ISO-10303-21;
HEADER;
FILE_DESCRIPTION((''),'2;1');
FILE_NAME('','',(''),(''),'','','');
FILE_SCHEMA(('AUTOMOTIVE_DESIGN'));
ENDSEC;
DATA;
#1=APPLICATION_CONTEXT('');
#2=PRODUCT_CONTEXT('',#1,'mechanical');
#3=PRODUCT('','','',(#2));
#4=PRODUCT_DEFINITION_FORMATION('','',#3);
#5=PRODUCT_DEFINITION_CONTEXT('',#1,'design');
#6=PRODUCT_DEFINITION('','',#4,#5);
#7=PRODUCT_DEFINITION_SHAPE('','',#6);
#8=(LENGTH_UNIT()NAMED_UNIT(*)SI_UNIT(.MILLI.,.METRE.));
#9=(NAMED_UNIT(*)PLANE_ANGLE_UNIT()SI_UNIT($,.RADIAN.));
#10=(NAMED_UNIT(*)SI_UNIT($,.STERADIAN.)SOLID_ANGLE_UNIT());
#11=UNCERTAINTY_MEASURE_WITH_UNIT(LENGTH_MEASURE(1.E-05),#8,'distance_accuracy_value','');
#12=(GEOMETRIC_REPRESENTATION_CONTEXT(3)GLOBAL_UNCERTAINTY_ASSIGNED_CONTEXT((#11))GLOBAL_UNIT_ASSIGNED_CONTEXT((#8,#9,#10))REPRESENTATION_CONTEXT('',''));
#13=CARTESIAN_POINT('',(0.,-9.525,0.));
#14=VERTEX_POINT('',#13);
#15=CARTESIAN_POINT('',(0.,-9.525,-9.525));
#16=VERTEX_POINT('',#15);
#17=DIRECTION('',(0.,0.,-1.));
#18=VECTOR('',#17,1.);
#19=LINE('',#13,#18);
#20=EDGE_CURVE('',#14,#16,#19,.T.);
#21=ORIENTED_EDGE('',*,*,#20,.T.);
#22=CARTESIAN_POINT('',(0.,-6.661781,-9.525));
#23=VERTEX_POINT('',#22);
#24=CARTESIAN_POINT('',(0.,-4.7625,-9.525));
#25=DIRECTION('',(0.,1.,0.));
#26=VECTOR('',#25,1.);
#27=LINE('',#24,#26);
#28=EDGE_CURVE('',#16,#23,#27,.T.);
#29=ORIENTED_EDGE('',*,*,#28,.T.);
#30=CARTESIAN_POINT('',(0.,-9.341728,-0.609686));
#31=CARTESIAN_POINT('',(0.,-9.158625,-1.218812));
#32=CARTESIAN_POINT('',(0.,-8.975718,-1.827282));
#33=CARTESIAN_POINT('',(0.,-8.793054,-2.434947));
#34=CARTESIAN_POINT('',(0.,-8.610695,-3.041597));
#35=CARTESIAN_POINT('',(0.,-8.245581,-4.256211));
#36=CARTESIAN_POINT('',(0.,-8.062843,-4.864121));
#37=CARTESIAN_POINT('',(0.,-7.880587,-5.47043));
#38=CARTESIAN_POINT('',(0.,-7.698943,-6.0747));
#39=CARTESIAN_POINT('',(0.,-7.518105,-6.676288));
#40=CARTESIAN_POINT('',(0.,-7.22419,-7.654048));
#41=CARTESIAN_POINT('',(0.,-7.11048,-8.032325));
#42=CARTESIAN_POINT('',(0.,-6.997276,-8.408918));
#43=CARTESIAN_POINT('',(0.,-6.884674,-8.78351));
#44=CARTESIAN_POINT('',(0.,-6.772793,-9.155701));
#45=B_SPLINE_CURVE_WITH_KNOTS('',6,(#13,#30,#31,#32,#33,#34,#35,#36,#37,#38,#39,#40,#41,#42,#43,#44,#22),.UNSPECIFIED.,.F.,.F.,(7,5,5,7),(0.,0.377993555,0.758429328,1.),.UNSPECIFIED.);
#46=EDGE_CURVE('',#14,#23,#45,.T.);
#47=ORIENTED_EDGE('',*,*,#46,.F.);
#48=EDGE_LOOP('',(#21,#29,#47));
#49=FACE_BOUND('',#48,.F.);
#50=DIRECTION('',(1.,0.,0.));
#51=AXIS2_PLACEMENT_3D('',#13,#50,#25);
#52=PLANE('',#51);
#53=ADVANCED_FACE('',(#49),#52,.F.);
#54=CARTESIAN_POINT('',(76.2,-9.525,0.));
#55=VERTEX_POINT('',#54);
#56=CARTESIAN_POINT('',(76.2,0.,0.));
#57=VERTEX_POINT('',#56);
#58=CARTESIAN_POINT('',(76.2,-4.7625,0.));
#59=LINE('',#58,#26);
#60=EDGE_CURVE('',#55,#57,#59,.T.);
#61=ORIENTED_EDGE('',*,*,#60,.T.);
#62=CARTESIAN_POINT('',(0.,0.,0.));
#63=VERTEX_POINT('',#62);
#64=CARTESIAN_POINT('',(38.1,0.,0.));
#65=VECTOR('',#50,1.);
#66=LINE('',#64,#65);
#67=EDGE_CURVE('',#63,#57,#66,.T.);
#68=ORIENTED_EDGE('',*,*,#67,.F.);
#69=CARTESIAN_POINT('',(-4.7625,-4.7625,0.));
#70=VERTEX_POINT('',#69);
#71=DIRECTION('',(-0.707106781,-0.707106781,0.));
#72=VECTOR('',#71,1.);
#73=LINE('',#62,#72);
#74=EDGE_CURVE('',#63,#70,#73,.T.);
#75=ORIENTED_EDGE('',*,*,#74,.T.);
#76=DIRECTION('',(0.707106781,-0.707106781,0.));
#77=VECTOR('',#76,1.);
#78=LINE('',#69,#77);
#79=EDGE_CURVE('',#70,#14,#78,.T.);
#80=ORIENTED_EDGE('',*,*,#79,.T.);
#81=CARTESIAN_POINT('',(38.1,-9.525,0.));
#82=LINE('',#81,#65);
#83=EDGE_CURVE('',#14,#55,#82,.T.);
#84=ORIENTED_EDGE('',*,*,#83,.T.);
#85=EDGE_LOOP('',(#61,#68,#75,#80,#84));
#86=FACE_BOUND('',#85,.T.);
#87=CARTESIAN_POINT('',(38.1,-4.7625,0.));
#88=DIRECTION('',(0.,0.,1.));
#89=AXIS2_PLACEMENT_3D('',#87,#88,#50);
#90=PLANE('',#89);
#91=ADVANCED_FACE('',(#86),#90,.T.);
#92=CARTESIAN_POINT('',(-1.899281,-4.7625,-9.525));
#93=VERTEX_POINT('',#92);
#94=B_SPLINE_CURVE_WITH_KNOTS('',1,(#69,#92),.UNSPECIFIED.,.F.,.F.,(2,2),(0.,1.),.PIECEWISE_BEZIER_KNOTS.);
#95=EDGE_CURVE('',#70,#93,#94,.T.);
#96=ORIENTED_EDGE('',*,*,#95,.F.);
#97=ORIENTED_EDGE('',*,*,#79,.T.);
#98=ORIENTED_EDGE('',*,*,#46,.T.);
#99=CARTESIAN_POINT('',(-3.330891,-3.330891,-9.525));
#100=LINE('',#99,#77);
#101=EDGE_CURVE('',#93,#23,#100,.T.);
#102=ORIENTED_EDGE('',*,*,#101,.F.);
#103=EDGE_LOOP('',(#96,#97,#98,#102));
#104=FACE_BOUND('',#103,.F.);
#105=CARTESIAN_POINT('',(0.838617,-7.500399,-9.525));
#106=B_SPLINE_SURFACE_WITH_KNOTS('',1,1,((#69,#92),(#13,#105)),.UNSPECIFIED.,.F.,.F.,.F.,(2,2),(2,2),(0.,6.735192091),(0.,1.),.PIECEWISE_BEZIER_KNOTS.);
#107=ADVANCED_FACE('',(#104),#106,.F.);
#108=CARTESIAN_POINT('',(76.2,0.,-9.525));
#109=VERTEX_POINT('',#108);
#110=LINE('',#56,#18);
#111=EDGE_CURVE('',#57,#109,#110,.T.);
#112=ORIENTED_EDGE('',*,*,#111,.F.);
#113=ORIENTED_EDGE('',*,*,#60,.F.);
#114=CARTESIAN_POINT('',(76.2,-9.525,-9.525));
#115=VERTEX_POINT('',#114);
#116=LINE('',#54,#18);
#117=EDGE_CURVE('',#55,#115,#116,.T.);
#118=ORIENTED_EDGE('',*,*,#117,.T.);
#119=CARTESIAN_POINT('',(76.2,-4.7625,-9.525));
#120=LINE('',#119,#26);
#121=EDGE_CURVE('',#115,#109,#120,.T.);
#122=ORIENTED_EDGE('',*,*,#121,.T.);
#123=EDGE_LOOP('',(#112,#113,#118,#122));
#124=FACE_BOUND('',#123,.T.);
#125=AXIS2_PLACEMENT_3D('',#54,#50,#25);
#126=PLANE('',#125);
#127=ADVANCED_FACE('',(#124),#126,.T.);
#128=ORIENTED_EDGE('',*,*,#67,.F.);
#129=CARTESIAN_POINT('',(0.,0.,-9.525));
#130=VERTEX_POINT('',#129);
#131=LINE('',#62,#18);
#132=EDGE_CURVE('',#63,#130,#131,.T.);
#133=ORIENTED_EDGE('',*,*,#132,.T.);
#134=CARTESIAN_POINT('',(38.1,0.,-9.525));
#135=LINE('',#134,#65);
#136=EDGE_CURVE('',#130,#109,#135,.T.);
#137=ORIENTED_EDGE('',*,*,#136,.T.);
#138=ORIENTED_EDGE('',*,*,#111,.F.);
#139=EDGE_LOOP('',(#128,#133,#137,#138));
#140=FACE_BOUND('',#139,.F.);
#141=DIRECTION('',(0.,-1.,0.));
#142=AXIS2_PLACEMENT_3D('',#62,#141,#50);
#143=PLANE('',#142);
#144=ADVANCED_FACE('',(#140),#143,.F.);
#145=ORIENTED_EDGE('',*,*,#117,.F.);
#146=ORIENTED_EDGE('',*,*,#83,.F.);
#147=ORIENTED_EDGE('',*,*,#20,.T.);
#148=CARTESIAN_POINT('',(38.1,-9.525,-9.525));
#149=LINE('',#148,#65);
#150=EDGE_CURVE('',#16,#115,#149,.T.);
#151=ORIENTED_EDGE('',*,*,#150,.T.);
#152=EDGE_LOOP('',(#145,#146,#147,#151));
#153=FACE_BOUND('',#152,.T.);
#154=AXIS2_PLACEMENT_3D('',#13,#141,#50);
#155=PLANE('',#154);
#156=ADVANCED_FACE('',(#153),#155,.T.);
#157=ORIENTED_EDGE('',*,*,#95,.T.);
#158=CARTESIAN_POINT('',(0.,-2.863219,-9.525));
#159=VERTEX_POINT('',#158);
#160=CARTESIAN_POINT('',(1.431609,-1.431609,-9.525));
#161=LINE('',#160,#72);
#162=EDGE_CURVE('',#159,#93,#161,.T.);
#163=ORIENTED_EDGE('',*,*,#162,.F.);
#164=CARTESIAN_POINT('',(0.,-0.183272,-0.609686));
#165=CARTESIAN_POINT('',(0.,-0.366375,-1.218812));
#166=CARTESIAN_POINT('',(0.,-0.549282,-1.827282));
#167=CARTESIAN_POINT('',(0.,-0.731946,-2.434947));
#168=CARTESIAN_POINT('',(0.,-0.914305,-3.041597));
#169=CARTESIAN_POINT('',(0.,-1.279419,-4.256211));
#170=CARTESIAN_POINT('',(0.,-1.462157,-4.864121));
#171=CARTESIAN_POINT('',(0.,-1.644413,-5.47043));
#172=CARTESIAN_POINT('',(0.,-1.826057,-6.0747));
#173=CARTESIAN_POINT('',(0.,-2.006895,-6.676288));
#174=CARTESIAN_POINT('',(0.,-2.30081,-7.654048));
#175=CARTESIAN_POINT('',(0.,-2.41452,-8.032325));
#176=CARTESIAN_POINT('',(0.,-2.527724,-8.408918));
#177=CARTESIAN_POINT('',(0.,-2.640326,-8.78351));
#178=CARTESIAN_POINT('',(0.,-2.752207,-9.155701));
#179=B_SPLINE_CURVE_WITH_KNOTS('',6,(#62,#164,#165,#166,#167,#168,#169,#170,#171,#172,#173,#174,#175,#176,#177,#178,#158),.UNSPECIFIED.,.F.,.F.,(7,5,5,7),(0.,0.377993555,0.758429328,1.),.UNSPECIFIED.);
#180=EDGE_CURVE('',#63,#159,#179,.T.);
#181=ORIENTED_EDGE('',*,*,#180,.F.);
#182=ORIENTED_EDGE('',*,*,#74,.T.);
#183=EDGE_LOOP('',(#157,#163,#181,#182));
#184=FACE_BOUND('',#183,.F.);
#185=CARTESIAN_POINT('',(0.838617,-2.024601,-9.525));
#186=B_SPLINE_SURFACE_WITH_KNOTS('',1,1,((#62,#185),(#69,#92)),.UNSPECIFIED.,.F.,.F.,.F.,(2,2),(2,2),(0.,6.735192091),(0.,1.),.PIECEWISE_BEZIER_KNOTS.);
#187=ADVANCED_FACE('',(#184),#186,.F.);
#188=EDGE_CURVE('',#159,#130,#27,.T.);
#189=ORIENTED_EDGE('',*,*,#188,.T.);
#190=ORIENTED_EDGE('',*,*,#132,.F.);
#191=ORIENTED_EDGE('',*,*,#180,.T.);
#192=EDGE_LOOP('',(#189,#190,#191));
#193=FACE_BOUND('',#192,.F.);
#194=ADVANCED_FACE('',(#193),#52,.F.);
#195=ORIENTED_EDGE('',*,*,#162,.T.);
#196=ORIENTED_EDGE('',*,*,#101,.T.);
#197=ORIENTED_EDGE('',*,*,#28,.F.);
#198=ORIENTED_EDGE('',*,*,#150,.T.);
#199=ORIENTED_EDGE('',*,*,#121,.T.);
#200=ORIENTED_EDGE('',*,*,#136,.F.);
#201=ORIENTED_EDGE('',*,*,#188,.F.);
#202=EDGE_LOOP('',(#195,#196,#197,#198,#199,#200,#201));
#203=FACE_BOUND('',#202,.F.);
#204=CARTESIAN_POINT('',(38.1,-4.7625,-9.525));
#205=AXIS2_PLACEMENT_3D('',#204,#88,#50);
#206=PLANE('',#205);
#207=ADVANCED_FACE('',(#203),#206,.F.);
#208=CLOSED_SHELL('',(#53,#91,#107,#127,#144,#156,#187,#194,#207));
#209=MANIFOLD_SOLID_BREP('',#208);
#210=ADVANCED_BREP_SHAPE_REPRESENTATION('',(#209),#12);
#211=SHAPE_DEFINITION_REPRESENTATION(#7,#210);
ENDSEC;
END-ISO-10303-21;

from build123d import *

# Parameters (mm, degrees)
F0_W     = 76.2
F0_H     = 9.525
F1_DEPTH = 9.525
F2_DEPTH = 9.525
F2_TAPER = 12


with BuildPart() as f1:
    # F0 (on Top) → F1 (new body)
    with BuildSketch(Plane.XY):
        with Locations((38.1, -4.7625)):
            Rectangle(F0_W, F0_H)
    extrude(amount=-F1_DEPTH)

    # F0 (on Top) → F2 (join)
    with BuildSketch(Plane.XY):
        with Locations((38.1, -4.7625)):
            Rectangle(F0_W, F0_H)
        Polygon((0, -9.525), (0, 0), (-4.7625, -4.7625), align=None)
    extrude(amount=-F2_DEPTH, taper=F2_TAPER)


solid = f1.part
